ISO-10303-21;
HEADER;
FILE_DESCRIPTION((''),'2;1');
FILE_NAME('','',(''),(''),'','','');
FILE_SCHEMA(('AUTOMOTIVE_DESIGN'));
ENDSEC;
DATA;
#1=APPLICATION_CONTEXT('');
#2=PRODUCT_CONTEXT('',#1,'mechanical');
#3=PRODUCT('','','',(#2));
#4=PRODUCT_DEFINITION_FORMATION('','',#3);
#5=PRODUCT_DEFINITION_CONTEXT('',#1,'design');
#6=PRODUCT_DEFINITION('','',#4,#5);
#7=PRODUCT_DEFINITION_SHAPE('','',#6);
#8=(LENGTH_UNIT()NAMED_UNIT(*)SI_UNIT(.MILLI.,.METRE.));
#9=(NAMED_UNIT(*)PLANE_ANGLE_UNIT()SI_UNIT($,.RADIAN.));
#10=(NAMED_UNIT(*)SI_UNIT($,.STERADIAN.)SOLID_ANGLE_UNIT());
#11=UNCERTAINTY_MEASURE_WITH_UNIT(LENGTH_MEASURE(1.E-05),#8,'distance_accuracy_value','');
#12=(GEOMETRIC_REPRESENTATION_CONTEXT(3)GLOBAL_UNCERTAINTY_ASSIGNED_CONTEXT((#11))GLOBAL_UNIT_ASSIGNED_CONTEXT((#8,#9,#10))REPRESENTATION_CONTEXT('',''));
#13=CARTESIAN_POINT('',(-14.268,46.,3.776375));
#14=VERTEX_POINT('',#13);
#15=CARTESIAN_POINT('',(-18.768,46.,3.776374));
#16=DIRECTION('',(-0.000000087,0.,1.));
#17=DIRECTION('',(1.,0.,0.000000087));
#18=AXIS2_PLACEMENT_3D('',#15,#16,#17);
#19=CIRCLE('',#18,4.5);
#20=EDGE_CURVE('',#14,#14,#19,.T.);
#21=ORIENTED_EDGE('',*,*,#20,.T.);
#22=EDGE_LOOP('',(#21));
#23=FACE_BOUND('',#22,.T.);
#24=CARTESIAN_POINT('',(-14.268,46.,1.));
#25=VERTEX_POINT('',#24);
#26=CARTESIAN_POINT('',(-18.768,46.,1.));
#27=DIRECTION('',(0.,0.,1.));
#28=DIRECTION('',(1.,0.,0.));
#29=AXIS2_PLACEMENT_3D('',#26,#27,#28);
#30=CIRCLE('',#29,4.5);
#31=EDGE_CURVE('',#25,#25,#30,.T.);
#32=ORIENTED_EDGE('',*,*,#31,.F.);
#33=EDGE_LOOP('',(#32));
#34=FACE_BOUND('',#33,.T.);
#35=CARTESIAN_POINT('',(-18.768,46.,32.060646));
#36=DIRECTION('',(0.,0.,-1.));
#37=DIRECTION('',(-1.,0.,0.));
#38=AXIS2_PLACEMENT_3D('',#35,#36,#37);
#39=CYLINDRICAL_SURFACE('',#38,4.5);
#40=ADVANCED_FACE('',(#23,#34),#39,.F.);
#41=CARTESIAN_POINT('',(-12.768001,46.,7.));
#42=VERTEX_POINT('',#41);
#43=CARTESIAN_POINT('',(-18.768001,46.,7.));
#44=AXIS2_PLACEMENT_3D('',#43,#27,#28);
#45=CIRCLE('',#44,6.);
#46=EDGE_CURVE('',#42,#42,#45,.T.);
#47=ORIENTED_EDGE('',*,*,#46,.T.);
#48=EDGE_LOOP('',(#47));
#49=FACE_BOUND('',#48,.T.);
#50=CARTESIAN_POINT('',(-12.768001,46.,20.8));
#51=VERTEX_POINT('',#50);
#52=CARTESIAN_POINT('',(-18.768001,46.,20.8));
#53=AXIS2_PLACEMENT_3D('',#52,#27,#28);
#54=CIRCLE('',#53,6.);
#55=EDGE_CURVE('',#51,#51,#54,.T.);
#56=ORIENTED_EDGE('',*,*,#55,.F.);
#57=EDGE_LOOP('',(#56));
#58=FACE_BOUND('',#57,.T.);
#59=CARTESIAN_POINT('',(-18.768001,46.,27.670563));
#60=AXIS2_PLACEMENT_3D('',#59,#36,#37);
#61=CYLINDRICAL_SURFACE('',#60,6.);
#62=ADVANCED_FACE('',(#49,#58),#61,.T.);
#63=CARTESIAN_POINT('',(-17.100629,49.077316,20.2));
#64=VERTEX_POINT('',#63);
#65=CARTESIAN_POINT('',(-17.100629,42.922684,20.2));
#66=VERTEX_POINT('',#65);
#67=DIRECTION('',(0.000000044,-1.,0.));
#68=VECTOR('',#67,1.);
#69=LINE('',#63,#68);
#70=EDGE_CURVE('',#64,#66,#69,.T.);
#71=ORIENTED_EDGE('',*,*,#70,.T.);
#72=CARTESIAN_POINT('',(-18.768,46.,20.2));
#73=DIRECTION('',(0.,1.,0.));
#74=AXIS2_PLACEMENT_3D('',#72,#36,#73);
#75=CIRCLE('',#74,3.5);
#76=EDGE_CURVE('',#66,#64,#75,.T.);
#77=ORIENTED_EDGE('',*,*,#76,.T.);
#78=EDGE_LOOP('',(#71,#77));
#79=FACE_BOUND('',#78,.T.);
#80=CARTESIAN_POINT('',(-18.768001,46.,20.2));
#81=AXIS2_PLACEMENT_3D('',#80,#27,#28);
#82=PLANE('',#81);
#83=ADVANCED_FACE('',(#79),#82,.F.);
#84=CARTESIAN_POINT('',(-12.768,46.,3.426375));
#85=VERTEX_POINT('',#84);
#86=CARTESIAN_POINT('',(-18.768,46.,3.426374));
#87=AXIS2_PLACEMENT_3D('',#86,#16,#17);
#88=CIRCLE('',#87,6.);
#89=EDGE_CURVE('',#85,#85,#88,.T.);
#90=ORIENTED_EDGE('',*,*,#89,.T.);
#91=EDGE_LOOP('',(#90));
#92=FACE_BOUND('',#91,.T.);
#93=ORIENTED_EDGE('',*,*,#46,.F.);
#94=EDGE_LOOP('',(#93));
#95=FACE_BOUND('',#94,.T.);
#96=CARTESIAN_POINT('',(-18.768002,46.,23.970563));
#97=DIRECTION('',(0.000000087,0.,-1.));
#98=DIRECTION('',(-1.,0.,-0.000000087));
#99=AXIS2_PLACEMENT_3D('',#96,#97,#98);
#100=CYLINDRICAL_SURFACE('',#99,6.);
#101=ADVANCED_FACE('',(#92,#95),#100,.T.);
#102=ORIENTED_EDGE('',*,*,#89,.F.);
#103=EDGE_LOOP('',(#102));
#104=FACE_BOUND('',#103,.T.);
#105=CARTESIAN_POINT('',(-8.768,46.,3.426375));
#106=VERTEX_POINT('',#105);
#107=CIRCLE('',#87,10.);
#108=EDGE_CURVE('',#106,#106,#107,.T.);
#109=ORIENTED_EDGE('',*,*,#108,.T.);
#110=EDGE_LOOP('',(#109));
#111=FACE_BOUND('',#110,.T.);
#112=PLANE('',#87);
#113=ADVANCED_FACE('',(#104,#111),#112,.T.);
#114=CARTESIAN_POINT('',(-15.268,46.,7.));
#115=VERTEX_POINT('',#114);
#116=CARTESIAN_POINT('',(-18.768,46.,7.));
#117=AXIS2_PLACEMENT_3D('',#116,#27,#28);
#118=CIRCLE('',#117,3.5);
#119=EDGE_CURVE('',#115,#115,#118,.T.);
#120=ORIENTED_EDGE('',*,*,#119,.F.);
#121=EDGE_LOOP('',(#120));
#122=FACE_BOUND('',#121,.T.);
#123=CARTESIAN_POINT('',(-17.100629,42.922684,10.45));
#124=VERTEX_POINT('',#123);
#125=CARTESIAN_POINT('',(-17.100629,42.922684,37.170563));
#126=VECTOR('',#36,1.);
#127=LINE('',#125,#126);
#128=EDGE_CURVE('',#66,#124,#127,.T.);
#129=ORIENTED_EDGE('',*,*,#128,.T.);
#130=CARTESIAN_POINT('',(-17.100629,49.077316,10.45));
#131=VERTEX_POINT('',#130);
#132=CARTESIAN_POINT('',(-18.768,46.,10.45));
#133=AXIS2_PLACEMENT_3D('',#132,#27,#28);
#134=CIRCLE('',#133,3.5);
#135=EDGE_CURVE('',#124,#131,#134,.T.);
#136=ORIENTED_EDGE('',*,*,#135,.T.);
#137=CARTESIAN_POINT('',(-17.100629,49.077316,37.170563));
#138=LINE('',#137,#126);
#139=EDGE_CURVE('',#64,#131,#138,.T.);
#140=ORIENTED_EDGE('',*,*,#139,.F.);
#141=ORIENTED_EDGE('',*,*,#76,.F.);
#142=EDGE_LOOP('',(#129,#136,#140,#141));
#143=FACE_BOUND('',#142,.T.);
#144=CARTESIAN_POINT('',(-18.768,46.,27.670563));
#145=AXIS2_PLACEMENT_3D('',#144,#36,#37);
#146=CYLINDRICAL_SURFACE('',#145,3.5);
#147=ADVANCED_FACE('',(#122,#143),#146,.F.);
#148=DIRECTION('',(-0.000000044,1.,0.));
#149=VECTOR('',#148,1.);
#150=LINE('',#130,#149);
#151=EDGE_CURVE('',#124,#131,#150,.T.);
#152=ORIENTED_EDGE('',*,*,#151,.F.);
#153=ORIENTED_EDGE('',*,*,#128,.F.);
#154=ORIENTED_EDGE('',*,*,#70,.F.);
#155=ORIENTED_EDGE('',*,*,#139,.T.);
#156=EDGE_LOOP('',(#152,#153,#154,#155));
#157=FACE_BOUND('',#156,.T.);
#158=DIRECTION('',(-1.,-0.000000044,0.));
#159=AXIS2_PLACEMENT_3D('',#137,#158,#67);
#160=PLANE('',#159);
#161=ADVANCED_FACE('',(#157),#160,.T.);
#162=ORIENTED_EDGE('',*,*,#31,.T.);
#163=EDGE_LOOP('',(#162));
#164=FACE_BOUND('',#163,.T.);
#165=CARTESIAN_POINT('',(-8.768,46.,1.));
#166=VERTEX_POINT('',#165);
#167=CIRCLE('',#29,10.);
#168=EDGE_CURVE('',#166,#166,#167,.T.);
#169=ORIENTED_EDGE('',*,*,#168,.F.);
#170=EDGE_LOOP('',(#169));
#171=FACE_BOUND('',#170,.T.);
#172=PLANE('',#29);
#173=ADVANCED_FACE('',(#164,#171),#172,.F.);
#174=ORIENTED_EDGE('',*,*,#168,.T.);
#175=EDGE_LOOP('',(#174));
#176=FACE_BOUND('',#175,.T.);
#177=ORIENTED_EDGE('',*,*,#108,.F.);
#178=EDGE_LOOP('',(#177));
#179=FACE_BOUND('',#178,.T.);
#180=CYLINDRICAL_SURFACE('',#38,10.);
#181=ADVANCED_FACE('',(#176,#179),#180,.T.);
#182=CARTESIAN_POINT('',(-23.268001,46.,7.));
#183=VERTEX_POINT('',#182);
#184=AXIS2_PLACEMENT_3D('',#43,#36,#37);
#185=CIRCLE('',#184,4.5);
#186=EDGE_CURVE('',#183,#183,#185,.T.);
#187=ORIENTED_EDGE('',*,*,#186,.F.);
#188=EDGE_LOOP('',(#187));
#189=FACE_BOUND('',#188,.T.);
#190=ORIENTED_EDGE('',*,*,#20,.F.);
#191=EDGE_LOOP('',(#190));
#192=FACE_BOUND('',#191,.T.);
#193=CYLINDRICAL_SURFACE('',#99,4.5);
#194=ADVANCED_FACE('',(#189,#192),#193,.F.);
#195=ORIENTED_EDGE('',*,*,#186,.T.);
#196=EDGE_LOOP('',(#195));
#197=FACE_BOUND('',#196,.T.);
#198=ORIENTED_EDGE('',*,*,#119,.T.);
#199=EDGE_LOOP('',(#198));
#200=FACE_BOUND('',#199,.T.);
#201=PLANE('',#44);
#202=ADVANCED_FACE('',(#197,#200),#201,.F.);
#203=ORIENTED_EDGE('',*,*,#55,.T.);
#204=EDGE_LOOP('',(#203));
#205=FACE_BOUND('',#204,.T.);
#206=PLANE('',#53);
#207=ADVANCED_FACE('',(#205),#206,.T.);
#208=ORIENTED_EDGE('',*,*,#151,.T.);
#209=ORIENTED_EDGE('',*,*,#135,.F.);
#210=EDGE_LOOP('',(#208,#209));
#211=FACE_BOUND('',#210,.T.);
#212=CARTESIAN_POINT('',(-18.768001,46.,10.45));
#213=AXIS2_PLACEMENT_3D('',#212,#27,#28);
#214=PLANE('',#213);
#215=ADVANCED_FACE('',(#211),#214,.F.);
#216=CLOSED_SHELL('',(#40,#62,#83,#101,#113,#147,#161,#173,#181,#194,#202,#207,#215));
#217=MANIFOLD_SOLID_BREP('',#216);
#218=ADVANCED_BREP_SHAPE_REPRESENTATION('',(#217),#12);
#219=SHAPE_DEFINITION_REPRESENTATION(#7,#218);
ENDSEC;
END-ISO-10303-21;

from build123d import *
from OCP.BRepAlgoAPI import BRepAlgoAPI_Cut
from OCP.TopTools import TopTools_ListOfShape

# Parameters (mm, degrees)
SKETCH1_R           = 10
SKETCH1_R_2         = 4.5
BOSS_EXTRUDE1_DEPTH = 2.776375223
SKETCH2_R           = 6
SKETCH2_R_2         = 4.5
BOSS_EXTRUDE3_DEPTH = 3.223625257
SKETCH3_R           = 6
SKETCH3_R_2         = 3.5
BOSS_EXTRUDE4_DEPTH = 3.45
SKETCH4_R           = 6
BOSS_EXTRUDE5_DEPTH = 9.75
SKETCH5_R           = 6
BOSS_EXTRUDE6_DEPTH = 0.6
CUT_EXTRUDE1_START  = -0.35
SKETCH6_R           = 10
SKETCH6_R_2         = 6
CUT_EXTRUDE1_DEPTH  = 0.35


with BuildPart() as part:
    # Sketch1 → Boss-Extrude1 (new body)
    with BuildSketch(Plane.XY.offset(1)):
        with Locations((-18.768000381, 45.999999683)):
            Circle(SKETCH1_R)
        with Locations((-18.768000381, 45.999999683)):
            Circle(SKETCH1_R_2, mode=Mode.SUBTRACT)
    extrude(amount=BOSS_EXTRUDE1_DEPTH)

    # Sketch2 → Boss-Extrude3 (add)
    with BuildSketch(Plane(origin=(-3.3e-07, 0, 3.77637599), x_dir=(0.9999999999999963, 0, 8.742277657347971e-08), z_dir=(-8.742277657347971e-08, -3.821370931908002e-15, 0.9999999999999963))):
        with Locations(Location((-18.76800005, 45.999999683, 0), (0, 0, 180))):
            Circle(SKETCH2_R)
        with Locations((-18.76800005, 45.999999683)):
            Circle(SKETCH2_R_2, mode=Mode.SUBTRACT)
    extrude(amount=BOSS_EXTRUDE3_DEPTH)


with BuildPart() as boss_extrude4_tool:
    # Sketch3 → Boss-Extrude4 (new body)
    with BuildSketch(Plane.XY.offset(7)):
        with Locations((-18.768000662, 45.999999683)):
            Circle(SKETCH3_R)
        with Locations((-18.768000381, 45.999999683)):
            Circle(SKETCH3_R_2, mode=Mode.SUBTRACT)
    extrude(amount=BOSS_EXTRUDE4_DEPTH)


with BuildPart() as part_1:
    add(part.part)


with BuildPart() as part_2:
    # Boss-Extrude4: joined with boss_extrude4_tool
    add(part_1.part.fuse(boss_extrude4_tool.part, tol=0.00001))

    # Sketch4 → Boss-Extrude5 (add)
    with BuildSketch(Plane.XY.offset(10.45)):
        with Locations((-18.768000662, 45.999999683)):
            Circle(SKETCH4_R)
        with BuildLine():
            Line((-17.100629081, 49.07731555), (-17.100628812, 42.922683961))
            ThreePointArc((-17.100628812, 42.922683961), (-22.268000381, 45.99999953), (-17.100629081, 49.07731555))
        make_face(mode=Mode.SUBTRACT)
    extrude(amount=BOSS_EXTRUDE5_DEPTH)

    # Sketch5 → Boss-Extrude6 (add)
    with BuildSketch(Plane.XY.offset(20.2)):
        with Locations((-18.768000662, 45.999999683)):
            Circle(SKETCH5_R)
    extrude(amount=BOSS_EXTRUDE6_DEPTH)


with BuildPart() as cut_extrude1_tool:
    # Sketch6 → Cut-Extrude1 (new body)
    with BuildSketch(Plane(origin=(-3.3e-07, 0, 3.77637599), x_dir=(0.9999999999999963, 0, 8.742277657347971e-08), z_dir=(-8.742277657347971e-08, -3.821370931908002e-15, 0.9999999999999963)).offset(CUT_EXTRUDE1_START)):
        with Locations((-18.76800005, 45.999999683)):
            Circle(SKETCH6_R)
        with Locations((-18.76800005, 45.999999683)):
            Circle(SKETCH6_R_2, mode=Mode.SUBTRACT)
    extrude(amount=CUT_EXTRUDE1_DEPTH)


with BuildPart() as part_3:
    add(part_2.part)

    # Cut-Extrude1: cut by cut_extrude1_tool, with a tolerance
    cut_extrude1_stock = TopTools_ListOfShape()
    cut_extrude1_stock.Append(part_3.part.wrapped)
    cut_extrude1_tools = TopTools_ListOfShape()
    cut_extrude1_tools.Append(cut_extrude1_tool.part.wrapped)
    cut_extrude1_cut = BRepAlgoAPI_Cut()
    cut_extrude1_cut.SetArguments(cut_extrude1_stock)
    cut_extrude1_cut.SetTools(cut_extrude1_tools)
    cut_extrude1_cut.SetFuzzyValue(0.00001)
    cut_extrude1_cut.Build()
    add(Compound.cast(cut_extrude1_cut.Shape()).solids(), mode=Mode.REPLACE)


solid = part_3.part
